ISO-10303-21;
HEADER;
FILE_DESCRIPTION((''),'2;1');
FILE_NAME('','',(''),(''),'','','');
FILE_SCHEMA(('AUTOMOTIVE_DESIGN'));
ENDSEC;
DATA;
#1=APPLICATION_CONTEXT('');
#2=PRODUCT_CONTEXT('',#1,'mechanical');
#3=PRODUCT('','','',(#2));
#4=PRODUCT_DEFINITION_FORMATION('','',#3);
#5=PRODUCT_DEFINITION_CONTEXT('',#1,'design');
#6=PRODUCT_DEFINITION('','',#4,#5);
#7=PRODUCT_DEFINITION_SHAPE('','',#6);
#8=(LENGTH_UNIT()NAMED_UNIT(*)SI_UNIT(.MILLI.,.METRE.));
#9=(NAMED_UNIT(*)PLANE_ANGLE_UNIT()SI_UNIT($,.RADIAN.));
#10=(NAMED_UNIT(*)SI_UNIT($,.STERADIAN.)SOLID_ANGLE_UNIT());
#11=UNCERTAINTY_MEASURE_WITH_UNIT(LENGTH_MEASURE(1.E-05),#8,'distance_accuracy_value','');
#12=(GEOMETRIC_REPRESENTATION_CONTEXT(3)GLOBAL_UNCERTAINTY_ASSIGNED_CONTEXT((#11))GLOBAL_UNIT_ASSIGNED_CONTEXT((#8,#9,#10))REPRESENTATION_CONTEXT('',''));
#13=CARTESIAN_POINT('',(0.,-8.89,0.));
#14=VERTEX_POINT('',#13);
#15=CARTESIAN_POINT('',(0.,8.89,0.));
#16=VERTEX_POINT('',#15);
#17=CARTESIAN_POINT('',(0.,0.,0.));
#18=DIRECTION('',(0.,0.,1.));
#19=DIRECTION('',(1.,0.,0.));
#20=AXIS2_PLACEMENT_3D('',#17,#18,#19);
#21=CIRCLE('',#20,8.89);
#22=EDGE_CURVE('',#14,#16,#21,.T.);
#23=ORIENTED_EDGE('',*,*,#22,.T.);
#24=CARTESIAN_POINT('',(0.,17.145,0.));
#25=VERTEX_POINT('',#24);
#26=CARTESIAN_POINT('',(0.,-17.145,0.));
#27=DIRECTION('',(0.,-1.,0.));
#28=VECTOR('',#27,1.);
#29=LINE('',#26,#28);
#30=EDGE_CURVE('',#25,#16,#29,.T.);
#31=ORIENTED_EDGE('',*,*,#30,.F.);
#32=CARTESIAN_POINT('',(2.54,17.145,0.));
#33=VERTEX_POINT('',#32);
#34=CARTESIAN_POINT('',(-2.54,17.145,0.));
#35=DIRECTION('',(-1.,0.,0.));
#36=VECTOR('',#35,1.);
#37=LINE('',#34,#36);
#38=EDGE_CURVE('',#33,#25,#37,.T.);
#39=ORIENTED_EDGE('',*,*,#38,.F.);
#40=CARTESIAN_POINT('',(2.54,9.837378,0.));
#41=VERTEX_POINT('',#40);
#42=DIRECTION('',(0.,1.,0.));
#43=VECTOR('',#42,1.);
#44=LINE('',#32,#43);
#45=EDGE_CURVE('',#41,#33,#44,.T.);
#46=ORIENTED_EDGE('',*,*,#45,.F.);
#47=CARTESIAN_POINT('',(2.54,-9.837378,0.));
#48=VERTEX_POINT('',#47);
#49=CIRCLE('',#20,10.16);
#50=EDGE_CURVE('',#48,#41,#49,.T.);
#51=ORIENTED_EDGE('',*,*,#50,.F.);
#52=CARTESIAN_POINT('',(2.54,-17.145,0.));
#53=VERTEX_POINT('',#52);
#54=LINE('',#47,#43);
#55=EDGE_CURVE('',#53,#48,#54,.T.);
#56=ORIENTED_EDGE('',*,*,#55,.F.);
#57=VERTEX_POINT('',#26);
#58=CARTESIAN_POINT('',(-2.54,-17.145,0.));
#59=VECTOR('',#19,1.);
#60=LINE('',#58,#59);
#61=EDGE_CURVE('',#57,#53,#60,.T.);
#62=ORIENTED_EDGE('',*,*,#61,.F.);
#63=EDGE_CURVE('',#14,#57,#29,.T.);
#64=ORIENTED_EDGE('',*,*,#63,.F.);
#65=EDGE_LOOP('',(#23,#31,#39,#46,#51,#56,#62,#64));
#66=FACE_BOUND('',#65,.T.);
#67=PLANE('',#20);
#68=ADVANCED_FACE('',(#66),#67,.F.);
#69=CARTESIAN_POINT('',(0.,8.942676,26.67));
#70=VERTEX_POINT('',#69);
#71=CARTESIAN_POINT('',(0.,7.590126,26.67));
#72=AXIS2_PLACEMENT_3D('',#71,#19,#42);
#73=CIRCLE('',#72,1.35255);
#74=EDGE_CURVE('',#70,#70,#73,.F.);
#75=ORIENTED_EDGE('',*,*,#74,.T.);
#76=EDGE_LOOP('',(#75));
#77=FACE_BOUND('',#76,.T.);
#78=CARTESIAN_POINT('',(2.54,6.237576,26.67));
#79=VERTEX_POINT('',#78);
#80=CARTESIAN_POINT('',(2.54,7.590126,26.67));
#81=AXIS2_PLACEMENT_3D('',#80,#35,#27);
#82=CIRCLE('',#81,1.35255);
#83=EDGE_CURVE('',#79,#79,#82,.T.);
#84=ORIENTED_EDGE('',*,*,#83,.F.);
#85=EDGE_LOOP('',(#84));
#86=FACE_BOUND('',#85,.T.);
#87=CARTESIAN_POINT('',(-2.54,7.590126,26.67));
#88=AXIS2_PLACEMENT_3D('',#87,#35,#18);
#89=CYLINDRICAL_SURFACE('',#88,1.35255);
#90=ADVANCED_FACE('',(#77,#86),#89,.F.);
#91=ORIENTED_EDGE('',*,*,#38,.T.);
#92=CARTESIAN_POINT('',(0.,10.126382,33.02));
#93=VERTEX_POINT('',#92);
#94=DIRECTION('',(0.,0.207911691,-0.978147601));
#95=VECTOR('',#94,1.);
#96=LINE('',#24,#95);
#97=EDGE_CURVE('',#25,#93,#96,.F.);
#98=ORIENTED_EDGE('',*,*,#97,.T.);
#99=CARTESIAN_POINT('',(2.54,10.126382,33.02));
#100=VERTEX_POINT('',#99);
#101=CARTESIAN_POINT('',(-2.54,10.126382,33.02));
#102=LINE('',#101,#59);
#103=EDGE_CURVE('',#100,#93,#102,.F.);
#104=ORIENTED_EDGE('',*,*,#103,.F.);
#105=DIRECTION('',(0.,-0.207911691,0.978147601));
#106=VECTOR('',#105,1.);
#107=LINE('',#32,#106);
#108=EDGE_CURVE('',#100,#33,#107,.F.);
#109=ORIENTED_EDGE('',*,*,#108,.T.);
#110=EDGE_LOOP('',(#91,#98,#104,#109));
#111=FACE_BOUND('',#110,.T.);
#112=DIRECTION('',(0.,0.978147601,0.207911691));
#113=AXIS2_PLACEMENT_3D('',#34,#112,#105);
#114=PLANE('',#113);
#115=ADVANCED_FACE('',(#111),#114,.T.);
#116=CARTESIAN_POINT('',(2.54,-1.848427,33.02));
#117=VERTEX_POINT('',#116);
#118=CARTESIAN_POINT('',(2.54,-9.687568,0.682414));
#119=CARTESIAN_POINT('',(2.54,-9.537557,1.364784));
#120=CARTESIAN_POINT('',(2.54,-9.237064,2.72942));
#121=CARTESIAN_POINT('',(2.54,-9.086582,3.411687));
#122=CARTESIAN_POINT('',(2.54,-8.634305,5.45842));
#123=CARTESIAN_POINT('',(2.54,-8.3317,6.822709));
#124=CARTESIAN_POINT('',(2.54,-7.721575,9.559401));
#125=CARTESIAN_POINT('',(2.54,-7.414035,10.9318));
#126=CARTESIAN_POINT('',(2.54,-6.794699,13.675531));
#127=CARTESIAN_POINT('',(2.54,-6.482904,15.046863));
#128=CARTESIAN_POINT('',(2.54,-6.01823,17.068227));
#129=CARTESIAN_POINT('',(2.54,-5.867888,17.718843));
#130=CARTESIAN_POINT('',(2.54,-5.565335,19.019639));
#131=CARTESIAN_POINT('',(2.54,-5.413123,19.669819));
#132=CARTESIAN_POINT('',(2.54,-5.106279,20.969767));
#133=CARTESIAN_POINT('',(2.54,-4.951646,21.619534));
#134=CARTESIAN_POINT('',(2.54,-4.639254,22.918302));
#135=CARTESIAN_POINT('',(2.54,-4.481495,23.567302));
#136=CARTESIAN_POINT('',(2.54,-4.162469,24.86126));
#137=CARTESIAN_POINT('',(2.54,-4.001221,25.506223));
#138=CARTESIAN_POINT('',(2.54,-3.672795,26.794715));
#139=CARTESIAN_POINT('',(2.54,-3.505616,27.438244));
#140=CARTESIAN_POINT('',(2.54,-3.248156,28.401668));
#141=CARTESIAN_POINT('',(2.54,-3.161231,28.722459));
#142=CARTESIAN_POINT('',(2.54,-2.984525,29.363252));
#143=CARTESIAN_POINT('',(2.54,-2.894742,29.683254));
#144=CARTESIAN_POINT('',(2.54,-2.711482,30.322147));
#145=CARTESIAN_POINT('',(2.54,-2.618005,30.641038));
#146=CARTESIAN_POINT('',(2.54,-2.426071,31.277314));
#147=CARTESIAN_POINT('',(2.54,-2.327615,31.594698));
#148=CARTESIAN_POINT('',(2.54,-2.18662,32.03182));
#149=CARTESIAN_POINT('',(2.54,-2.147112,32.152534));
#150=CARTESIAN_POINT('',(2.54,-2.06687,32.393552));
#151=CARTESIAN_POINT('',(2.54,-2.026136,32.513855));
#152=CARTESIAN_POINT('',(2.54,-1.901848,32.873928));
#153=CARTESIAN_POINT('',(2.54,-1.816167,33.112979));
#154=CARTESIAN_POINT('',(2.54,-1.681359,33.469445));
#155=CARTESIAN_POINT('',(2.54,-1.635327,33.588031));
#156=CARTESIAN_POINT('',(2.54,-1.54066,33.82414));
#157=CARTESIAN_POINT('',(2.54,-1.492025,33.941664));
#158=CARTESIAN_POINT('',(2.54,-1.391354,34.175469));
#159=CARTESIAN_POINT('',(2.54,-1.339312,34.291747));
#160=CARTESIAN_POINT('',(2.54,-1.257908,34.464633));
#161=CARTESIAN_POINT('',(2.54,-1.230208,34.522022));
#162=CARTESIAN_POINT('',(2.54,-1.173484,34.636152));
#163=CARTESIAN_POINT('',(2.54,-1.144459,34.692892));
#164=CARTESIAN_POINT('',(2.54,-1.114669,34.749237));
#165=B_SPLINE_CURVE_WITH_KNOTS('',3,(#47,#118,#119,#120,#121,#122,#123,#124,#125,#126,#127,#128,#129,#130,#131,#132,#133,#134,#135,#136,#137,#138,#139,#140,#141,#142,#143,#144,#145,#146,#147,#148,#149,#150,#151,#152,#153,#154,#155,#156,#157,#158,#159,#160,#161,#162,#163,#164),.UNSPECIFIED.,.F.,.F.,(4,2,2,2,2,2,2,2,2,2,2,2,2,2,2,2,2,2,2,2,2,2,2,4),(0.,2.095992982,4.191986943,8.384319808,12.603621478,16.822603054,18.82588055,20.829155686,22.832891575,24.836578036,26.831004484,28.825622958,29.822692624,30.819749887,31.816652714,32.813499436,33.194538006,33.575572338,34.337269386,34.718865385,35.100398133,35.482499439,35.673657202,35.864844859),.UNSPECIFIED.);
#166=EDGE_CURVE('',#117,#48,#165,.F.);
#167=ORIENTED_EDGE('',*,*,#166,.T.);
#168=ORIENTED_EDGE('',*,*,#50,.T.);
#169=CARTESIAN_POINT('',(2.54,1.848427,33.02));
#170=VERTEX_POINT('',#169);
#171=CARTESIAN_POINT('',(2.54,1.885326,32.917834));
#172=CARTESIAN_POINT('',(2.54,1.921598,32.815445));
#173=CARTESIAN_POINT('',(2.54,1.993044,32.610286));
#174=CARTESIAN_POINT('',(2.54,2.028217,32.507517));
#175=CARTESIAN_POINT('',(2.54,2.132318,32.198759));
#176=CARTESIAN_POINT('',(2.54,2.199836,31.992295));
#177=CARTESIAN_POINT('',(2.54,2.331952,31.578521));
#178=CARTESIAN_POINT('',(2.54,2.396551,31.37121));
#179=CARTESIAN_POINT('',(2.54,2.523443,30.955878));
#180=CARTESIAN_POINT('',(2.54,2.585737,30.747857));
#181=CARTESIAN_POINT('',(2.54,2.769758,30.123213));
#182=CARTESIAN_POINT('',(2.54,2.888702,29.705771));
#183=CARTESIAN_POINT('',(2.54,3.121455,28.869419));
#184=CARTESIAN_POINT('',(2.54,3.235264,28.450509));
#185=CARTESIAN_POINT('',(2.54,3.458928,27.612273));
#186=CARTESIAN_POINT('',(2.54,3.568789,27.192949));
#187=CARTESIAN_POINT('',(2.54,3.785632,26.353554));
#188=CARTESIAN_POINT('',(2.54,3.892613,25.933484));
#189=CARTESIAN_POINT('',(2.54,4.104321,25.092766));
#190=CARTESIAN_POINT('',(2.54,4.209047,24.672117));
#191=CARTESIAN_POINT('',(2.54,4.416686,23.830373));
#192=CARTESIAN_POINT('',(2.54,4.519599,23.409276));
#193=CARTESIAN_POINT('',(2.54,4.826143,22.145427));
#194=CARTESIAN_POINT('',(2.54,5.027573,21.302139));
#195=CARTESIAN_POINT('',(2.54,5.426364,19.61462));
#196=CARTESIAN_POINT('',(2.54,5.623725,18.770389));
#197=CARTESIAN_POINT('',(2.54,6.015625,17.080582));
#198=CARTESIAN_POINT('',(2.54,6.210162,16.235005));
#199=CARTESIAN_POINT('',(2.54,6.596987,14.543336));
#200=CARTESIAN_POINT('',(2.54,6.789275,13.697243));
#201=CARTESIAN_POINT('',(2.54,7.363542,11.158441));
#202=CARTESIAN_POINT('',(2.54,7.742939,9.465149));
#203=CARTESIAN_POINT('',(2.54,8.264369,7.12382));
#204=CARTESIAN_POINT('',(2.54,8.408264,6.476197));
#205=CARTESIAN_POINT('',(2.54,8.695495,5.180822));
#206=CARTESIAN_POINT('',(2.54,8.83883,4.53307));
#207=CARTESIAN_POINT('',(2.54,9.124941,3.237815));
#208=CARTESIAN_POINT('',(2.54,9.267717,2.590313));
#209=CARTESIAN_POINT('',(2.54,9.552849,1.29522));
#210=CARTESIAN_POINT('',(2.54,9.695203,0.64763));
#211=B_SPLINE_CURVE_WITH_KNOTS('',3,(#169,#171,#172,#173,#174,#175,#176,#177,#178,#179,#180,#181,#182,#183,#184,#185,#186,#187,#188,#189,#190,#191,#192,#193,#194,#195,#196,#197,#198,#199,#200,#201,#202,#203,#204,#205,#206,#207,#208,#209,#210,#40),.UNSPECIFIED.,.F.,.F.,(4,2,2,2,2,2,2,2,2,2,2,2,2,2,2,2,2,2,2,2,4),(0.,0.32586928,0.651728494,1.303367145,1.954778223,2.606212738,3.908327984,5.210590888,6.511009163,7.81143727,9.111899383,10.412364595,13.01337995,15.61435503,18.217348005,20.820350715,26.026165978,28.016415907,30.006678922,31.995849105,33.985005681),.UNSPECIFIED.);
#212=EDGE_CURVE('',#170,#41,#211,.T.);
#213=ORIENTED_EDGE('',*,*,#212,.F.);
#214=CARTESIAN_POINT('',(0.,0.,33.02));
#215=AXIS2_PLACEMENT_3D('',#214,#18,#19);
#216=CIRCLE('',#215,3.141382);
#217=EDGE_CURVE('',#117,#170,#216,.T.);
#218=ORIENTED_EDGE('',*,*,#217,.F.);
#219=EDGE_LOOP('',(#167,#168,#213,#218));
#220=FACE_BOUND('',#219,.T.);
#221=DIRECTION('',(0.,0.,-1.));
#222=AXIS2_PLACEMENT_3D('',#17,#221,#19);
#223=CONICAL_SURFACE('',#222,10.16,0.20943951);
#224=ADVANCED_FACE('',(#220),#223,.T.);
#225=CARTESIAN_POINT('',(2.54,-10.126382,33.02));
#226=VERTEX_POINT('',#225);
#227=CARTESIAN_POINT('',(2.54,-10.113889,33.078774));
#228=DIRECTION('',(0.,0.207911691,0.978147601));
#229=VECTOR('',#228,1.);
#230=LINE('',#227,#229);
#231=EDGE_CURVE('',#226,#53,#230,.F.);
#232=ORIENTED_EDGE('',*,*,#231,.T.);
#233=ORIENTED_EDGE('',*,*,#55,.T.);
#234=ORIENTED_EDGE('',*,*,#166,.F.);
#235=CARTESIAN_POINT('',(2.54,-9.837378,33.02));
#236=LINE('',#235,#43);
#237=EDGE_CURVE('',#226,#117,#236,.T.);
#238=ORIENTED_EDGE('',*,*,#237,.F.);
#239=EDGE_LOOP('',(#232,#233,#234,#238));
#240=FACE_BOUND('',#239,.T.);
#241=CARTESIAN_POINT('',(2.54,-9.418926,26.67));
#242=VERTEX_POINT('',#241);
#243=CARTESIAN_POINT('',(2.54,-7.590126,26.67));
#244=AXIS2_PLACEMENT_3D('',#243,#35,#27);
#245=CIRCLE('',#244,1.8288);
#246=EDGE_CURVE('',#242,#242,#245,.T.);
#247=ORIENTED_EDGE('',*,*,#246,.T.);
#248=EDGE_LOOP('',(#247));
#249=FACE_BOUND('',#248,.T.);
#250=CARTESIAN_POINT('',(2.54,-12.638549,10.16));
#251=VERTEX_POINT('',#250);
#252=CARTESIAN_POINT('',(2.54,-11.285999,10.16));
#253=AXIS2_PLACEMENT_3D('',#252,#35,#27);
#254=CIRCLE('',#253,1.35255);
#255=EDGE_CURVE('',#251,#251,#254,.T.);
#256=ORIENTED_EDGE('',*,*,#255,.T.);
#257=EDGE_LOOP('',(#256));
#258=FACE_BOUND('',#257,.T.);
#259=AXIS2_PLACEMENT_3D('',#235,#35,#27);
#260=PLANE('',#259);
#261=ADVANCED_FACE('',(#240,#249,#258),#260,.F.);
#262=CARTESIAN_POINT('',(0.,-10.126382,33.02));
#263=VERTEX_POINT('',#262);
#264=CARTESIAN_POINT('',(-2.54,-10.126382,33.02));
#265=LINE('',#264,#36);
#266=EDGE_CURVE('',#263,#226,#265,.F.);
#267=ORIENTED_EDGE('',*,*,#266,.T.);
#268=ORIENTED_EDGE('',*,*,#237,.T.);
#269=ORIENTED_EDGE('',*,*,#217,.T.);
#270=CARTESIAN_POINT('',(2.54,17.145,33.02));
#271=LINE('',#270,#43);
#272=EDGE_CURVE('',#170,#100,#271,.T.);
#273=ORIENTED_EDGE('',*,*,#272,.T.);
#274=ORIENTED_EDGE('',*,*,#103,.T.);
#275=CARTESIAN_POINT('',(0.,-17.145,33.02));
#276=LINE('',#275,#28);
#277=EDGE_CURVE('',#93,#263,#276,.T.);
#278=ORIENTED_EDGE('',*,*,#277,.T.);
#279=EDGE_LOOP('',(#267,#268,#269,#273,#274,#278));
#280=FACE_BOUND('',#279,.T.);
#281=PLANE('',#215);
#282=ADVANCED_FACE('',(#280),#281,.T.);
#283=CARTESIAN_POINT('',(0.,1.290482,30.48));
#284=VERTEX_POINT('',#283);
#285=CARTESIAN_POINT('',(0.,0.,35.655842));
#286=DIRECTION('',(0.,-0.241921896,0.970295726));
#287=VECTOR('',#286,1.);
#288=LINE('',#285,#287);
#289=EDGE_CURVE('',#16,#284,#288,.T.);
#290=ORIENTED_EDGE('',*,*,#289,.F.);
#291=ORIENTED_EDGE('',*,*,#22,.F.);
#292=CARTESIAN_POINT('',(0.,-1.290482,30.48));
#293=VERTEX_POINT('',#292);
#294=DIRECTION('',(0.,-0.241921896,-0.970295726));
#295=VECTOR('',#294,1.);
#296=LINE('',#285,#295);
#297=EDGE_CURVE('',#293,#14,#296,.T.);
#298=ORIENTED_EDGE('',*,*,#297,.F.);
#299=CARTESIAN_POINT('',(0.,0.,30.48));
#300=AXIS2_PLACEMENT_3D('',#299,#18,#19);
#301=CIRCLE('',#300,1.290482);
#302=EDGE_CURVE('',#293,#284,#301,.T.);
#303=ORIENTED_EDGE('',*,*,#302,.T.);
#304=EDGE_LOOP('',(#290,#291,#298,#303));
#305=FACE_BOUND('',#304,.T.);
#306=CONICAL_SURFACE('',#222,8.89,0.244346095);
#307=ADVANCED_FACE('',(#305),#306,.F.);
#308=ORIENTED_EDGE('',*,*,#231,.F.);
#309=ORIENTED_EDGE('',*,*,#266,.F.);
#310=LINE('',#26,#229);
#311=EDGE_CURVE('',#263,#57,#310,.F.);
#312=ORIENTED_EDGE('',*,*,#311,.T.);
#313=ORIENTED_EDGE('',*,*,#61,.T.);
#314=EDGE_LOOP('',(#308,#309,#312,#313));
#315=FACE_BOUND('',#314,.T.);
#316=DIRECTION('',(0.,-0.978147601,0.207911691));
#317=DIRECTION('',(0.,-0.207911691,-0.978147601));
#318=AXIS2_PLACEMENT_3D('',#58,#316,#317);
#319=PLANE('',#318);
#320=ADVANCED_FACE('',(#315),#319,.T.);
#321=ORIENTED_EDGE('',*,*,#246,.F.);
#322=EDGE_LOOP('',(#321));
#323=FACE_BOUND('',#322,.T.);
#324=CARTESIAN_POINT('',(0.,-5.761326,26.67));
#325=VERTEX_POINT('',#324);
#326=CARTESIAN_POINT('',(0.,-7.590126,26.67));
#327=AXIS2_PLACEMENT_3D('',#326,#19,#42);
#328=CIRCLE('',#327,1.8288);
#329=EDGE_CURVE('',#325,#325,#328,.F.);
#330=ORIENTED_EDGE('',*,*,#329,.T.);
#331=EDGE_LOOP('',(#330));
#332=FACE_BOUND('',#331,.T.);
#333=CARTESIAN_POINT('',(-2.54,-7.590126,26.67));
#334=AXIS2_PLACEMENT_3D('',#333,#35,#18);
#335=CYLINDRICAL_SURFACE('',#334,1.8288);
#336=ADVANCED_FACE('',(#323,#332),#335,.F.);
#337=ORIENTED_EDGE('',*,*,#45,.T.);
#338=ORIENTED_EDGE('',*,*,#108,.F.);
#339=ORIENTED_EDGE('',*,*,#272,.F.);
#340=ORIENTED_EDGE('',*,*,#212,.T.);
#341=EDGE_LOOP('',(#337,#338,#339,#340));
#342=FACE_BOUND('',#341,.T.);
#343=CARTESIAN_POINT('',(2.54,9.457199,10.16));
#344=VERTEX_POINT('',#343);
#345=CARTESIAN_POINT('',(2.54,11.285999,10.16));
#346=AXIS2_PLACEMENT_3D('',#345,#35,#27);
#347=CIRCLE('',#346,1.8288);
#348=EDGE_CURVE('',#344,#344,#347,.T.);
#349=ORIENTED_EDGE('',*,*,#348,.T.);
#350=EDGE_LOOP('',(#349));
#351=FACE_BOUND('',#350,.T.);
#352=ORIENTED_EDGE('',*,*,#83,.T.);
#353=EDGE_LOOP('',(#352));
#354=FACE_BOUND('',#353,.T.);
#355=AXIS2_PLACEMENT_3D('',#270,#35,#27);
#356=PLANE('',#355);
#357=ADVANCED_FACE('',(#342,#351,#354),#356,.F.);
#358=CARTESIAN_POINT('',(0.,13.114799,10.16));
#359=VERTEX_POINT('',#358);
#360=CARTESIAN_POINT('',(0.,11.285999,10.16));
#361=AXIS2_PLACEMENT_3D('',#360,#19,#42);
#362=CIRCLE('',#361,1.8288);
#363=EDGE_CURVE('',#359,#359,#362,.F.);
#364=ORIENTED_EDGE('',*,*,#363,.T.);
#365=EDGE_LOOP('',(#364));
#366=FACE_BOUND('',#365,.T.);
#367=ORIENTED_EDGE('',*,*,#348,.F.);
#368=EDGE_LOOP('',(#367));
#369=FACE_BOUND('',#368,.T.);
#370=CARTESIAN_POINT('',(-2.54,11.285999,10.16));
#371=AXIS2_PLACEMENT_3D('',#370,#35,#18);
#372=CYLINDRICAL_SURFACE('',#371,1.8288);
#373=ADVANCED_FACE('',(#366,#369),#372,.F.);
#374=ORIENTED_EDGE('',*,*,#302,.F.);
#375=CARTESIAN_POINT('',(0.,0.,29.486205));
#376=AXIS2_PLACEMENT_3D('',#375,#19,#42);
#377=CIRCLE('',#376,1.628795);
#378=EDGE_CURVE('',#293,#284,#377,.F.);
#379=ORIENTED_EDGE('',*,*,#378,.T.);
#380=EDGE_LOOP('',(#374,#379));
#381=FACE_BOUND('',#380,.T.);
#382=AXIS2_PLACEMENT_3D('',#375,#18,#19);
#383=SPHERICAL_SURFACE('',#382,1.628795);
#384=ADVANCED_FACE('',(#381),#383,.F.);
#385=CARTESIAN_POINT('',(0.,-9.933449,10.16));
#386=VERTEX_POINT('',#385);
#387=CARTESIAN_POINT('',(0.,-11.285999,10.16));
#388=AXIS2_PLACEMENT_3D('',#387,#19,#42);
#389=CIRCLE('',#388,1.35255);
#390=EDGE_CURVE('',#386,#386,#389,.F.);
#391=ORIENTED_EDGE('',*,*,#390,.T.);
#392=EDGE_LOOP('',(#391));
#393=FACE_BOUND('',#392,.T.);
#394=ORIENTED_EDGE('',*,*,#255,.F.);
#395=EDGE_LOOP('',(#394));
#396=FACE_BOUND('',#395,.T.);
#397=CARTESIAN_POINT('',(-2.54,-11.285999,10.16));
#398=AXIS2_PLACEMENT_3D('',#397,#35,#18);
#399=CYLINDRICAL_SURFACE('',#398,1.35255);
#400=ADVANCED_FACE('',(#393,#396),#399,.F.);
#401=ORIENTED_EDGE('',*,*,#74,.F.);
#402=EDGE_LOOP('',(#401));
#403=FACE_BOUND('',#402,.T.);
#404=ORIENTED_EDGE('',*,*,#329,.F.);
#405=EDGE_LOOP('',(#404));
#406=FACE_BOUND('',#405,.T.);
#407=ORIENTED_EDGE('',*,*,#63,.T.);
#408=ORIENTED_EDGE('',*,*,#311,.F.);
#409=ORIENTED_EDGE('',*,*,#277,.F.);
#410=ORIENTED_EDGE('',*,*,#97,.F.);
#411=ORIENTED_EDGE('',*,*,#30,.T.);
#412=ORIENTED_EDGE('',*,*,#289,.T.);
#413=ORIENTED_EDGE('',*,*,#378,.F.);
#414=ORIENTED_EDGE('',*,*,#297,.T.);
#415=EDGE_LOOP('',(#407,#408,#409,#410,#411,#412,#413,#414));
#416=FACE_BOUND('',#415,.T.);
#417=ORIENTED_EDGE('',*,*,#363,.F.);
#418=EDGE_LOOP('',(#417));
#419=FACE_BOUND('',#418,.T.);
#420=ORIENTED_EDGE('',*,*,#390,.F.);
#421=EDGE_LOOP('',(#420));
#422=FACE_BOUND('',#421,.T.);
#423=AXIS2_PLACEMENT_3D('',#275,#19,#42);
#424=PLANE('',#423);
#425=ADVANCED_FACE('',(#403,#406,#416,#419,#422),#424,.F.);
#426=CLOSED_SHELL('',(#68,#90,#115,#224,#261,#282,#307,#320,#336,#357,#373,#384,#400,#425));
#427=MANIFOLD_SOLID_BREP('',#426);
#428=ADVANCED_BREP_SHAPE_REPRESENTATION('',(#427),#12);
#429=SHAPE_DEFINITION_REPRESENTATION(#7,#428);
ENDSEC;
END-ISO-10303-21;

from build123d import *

# Parameters (mm, degrees)
SKETCH1_R                   = 8.89
BOSS_EXTRUDE1_DEPTH         = 30.48
BOSS_EXTRUDE1_TAPER         = 14
DOME1_FACE_RADIUS           = 1.290482473
DOME1_HEIGHT                = 0.635
BOSS_EXTRUDE2_DEPTH         = 33.02
DRAFT1_ANGLE                = -12
F_27_0_144_DIAMETER_HOLE1_D = 3.6576
F_6_32_TAPPED_HOLE1_D       = 2.7051
F_6_32_TAPPED_HOLE1_DEPTH   = 11.176
F_6_32_TAPPED_HOLE1_TIP     = 0.81269403
SKETCH12_W                  = 10.592126778
SKETCH12_H                  = 34.29
CUT_EXTRUDE1_DEPTH          = 39.568082983


with BuildPart() as part:
    # Sketch1 → Boss-Extrude1 (new body)
    with BuildSketch(Plane.XY):
        Circle(SKETCH1_R)
    extrude(amount=BOSS_EXTRUDE1_DEPTH, taper=BOSS_EXTRUDE1_TAPER)

    # Dome1: a dome of height H over a round flat face of radius A is a cap of a sphere of radius (A * A + H * H) / (2 * H)
    dome1_r = (DOME1_FACE_RADIUS * DOME1_FACE_RADIUS + DOME1_HEIGHT * DOME1_HEIGHT) / (2 * DOME1_HEIGHT)
    dome1_base = Plane((0, 0, 30.48), z_dir=(0, 0, 1))
    with Locations(dome1_base.offset(DOME1_HEIGHT - dome1_r)):
        dome1_ball = Sphere(dome1_r, mode=Mode.PRIVATE)
    add(split(dome1_ball, bisect_by=dome1_base, keep=Keep.TOP, mode=Mode.PRIVATE))


with BuildPart() as body_2:
    # Sketch2 → Boss-Extrude2 (new body)
    with BuildSketch(Plane.XY):
        with BuildLine():
            Line((-2.54, 17.145), (-2.54, 9.837377699))
            ThreePointArc((-2.54, 9.837377699), (-10.16, 0), (-2.54, -9.837377699))
            Line((-2.54, -9.837377699), (-2.54, -17.145))
            Line((-2.54, -17.145), (2.54, -17.145))
            Line((2.54, -17.145), (2.54, -9.837377699))
            ThreePointArc((2.54, -9.837377699), (10.16, 0), (2.54, 9.837377699))
            Line((2.54, 9.837377699), (2.54, 17.145))
            Line((2.54, 17.145), (-2.54, 17.145))
        make_face()
    extrude(amount=BOSS_EXTRUDE2_DEPTH)

    # Combine1: read off the stored shape, not the designer's step
    # Combine1: cut part
    add(part.part, mode=Mode.SUBTRACT)

    # Draft1
    draft1_faces = [body_2.faces().sort_by_distance(p)[0] for p in [
        (0, -17.145, 16.51),
        (0, 17.145, 16.51),
        (10.16, 0, 16.51),
        (-10.16, 0, 16.51),
    ]]
    draft(draft1_faces, Plane(origin=(0, 0, 0), x_dir=(-1, 0, 0), z_dir=(0, 0, -1)), DRAFT1_ANGLE)

    # #27 (0.144) Diameter Hole1 (through all)
    with Locations(Plane.ZY.offset(2.54)):
        with Locations((10.16, 11.285999498), (26.67, -7.590126179)):
            Hole(F_27_0_144_DIAMETER_HOLE1_D / 2)

    # #6-32 Tapped Hole1
    with Locations(Plane.ZY.offset(2.54)):
        with Locations((26.67, 7.590126179), (10.16, -11.285999498)):
            Hole(F_6_32_TAPPED_HOLE1_D / 2, depth=F_6_32_TAPPED_HOLE1_DEPTH)
            with Locations((0, 0, -(F_6_32_TAPPED_HOLE1_DEPTH + F_6_32_TAPPED_HOLE1_TIP / 2))):  # 118° drill point
                Cone(0, F_6_32_TAPPED_HOLE1_D / 2, F_6_32_TAPPED_HOLE1_TIP, mode=Mode.SUBTRACT)

    # Sketch12 → Cut-Extrude1 (cut, through all)
    with BuildSketch(Plane(origin=(0, 0, 0), x_dir=(-1, 0, 0), z_dir=(0, 0, -1))):
        with Locations((5.296063389, 0)):
            Rectangle(SKETCH12_W, SKETCH12_H)
    extrude(amount=-CUT_EXTRUDE1_DEPTH, mode=Mode.SUBTRACT)


solid = body_2.part
